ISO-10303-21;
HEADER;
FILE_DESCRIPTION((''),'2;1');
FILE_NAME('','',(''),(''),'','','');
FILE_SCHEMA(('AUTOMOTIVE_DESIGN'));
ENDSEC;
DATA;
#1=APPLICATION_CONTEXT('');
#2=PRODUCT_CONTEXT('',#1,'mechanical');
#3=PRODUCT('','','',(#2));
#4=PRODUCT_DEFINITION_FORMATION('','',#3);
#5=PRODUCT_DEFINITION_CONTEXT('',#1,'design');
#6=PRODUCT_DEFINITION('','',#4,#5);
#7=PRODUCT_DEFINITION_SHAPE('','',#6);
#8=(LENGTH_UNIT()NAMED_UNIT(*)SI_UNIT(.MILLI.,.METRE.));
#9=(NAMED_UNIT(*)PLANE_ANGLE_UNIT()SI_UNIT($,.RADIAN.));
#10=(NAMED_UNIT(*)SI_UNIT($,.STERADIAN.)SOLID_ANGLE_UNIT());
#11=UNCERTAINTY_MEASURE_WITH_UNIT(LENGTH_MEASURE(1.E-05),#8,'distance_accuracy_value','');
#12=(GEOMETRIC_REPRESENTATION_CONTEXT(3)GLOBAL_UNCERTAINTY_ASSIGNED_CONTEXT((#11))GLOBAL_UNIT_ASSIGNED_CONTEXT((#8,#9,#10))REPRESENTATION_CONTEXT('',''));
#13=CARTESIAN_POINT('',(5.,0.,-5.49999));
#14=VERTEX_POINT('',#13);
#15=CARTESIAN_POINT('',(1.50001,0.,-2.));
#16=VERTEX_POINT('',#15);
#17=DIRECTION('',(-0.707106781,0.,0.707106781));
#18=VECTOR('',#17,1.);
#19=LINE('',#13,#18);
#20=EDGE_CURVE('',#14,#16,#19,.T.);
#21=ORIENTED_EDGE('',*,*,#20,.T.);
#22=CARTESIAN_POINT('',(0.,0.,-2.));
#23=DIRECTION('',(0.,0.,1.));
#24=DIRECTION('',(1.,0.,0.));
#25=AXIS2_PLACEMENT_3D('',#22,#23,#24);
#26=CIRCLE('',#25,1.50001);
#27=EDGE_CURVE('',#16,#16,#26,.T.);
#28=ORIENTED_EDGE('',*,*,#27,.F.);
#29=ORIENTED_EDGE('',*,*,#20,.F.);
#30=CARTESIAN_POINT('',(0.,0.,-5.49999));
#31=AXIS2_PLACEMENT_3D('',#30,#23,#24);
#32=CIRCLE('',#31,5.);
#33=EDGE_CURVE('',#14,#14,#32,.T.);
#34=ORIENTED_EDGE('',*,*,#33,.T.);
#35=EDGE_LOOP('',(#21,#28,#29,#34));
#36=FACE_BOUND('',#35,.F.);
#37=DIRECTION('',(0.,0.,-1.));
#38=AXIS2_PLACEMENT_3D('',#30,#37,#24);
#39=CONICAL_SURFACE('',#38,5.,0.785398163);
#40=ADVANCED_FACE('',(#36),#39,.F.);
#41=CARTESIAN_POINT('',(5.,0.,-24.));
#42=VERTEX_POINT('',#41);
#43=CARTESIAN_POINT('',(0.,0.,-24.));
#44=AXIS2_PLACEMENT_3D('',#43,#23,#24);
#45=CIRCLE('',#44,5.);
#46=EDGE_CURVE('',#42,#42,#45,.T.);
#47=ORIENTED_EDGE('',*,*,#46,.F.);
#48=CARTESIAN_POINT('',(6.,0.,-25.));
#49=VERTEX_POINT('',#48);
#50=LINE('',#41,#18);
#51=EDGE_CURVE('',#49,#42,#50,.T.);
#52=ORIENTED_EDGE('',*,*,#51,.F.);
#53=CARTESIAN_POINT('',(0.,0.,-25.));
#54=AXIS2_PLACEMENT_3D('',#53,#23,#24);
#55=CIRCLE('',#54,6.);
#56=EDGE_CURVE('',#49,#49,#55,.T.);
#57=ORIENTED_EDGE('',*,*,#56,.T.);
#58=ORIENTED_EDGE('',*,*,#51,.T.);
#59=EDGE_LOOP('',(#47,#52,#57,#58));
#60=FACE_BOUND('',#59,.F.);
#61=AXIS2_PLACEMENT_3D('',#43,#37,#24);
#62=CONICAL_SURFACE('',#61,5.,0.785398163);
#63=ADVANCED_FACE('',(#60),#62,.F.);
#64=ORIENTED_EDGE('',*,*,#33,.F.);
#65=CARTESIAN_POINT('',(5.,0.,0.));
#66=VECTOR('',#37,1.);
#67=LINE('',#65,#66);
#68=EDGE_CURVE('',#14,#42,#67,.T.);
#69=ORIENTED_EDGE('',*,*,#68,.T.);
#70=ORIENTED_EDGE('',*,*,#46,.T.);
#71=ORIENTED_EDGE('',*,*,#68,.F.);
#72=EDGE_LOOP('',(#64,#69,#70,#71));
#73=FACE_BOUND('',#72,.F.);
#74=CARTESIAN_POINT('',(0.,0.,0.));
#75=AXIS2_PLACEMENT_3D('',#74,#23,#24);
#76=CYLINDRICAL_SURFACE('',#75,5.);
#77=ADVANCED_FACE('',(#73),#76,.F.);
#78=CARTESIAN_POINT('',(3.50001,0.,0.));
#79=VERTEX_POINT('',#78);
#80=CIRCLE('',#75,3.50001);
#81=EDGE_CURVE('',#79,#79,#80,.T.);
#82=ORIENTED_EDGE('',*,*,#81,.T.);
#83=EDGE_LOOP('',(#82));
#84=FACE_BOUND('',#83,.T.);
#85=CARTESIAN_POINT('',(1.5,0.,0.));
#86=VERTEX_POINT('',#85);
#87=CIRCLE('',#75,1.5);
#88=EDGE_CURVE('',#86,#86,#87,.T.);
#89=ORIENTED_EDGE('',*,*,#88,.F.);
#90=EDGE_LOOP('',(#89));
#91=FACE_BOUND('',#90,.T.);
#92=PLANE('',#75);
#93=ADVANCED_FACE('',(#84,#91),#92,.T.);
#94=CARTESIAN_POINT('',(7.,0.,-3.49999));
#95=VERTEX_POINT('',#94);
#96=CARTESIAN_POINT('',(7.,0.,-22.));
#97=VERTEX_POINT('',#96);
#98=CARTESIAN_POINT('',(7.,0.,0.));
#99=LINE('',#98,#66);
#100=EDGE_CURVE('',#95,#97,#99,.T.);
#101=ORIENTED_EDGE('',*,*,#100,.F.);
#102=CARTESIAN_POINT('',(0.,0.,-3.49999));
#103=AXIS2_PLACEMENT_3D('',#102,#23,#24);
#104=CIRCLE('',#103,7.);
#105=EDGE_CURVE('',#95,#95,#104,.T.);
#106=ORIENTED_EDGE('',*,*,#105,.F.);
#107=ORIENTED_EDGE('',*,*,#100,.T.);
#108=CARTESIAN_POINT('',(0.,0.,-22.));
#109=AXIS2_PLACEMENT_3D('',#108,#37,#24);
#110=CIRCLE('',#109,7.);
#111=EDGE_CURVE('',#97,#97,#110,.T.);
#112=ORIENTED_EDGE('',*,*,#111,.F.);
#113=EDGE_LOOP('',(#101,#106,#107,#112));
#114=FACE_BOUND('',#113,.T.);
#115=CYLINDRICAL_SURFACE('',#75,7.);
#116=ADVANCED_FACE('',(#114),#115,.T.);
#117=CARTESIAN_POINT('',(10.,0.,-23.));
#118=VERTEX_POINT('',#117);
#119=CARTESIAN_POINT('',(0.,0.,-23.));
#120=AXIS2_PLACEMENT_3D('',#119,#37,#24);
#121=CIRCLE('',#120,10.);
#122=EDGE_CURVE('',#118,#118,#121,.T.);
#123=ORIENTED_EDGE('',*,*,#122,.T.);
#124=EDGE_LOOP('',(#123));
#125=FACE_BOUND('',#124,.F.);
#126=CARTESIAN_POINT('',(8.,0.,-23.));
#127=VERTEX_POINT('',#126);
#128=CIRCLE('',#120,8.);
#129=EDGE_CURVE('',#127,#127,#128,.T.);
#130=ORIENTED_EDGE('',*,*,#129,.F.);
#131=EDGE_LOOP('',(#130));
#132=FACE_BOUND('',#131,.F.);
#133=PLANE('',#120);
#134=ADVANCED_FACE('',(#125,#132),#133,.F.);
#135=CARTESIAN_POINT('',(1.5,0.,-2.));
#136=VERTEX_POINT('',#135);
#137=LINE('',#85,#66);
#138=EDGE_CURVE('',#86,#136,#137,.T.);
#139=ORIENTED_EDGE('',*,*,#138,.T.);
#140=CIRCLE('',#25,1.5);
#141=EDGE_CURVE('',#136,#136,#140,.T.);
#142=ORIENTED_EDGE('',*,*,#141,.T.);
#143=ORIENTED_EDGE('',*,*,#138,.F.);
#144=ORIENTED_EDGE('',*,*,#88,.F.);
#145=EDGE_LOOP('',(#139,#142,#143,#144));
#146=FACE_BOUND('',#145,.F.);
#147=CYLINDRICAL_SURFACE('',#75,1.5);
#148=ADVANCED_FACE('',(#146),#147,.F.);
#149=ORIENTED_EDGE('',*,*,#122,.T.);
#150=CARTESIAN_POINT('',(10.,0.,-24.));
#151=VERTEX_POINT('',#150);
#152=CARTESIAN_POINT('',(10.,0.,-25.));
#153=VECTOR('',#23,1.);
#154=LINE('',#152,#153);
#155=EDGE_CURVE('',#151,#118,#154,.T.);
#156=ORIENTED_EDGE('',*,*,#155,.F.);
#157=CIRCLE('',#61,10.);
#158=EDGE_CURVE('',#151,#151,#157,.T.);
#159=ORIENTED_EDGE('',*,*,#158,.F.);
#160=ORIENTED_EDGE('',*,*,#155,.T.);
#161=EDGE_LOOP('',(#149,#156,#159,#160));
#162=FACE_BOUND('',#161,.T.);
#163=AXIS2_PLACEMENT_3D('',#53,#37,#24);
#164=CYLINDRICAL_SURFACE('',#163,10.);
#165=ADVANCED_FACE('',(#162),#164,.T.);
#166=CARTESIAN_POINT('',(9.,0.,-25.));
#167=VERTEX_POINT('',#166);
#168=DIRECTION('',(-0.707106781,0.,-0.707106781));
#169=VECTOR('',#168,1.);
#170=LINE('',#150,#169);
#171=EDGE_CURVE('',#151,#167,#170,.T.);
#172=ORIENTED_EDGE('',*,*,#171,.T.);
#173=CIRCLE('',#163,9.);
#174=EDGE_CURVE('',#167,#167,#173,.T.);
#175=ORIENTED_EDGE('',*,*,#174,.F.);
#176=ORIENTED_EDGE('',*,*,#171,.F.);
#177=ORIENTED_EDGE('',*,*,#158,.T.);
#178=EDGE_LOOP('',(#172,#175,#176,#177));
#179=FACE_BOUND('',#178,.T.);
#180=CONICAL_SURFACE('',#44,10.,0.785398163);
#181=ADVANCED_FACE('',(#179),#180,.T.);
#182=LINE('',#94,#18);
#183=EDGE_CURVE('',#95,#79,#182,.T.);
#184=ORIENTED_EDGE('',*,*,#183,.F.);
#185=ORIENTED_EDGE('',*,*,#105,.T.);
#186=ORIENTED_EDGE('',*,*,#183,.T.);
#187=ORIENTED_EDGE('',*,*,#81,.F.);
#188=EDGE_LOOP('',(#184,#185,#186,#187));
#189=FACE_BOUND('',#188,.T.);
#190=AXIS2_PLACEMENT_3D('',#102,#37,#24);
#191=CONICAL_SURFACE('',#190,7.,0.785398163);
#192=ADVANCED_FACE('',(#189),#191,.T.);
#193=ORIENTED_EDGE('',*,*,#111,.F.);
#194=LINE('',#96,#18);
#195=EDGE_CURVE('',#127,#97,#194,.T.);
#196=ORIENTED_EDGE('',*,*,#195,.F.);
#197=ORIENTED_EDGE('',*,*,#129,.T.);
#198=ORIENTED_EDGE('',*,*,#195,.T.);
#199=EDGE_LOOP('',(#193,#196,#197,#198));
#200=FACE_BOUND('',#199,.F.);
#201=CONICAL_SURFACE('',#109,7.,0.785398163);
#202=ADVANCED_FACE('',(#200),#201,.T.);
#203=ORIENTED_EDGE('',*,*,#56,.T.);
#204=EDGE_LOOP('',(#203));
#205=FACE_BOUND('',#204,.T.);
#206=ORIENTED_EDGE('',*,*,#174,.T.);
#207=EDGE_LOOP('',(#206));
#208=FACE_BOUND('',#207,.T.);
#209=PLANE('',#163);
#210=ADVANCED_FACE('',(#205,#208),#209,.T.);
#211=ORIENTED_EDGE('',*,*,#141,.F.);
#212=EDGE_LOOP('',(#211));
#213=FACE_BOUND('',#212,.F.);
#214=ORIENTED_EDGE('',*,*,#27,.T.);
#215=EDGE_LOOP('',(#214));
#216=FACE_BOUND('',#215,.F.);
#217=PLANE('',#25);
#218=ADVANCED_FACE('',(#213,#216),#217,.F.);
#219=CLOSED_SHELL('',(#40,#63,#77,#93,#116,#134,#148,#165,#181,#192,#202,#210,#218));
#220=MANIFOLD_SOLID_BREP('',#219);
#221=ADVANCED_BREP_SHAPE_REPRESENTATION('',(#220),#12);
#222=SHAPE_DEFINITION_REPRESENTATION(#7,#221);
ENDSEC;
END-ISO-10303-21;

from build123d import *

# Parameters (mm, degrees)
F0_R     = 7
F0_R_2   = 1.5
F1_DEPTH = 25
F2_T     = -2
F3_DEPTH = 25
F4_R     = 10
F4_R_2   = 7
F5_DEPTH = 2
F6_SIZE  = 1
F7_SIZE  = 3.49999


# Not quite as in the source:
# - a fillet or chamfer is up to 0.001 mm smaller than in the source, because OpenCascade refuses the exact size


with BuildPart() as f1:
    # F0 (on Top) → F1 (new body)
    with BuildSketch(Plane.XY):
        Circle(F0_R)
        Circle(F0_R_2, mode=Mode.SUBTRACT)
        Circle(F0_R_2)
    extrude(amount=-F1_DEPTH)

    # F2
    f2_openings = [f1.faces().sort_by_distance(p)[0] for p in [
        (0, 0, -25),
    ]]
    offset(amount=F2_T, openings=f2_openings)

    # F0 (on Top) → F3 (cut)
    with BuildSketch(Plane.XY):
        Circle(F0_R_2)
    extrude(amount=-F3_DEPTH, mode=Mode.SUBTRACT)

    # F4 (on face) → F5 (join)
    with BuildSketch(Plane(origin=(0, 0, -25), x_dir=(1, 0, 0), z_dir=(0, 0, -1))):
        Circle(F4_R)
        Circle(F4_R_2, mode=Mode.SUBTRACT)
    extrude(amount=-F5_DEPTH)

    # F6
    f6_edges = [f1.edges().sort_by_distance(p)[0] for p in [
        (-7, 0, -23),
        (-5, 0, -25),
        (-10, 0, -25),
    ]]
    chamfer(f6_edges, length=F6_SIZE)

    # F7 (size 3.5 in the source; OpenCascade refuses exactly that, so slightly less here)
    f7_edges = [f1.edges().sort_by_distance(p)[0] for p in [
        (-7, 0, 0),
        (-5, 0, -2),
    ]]
    chamfer(f7_edges, length=F7_SIZE)


solid = f1.part
